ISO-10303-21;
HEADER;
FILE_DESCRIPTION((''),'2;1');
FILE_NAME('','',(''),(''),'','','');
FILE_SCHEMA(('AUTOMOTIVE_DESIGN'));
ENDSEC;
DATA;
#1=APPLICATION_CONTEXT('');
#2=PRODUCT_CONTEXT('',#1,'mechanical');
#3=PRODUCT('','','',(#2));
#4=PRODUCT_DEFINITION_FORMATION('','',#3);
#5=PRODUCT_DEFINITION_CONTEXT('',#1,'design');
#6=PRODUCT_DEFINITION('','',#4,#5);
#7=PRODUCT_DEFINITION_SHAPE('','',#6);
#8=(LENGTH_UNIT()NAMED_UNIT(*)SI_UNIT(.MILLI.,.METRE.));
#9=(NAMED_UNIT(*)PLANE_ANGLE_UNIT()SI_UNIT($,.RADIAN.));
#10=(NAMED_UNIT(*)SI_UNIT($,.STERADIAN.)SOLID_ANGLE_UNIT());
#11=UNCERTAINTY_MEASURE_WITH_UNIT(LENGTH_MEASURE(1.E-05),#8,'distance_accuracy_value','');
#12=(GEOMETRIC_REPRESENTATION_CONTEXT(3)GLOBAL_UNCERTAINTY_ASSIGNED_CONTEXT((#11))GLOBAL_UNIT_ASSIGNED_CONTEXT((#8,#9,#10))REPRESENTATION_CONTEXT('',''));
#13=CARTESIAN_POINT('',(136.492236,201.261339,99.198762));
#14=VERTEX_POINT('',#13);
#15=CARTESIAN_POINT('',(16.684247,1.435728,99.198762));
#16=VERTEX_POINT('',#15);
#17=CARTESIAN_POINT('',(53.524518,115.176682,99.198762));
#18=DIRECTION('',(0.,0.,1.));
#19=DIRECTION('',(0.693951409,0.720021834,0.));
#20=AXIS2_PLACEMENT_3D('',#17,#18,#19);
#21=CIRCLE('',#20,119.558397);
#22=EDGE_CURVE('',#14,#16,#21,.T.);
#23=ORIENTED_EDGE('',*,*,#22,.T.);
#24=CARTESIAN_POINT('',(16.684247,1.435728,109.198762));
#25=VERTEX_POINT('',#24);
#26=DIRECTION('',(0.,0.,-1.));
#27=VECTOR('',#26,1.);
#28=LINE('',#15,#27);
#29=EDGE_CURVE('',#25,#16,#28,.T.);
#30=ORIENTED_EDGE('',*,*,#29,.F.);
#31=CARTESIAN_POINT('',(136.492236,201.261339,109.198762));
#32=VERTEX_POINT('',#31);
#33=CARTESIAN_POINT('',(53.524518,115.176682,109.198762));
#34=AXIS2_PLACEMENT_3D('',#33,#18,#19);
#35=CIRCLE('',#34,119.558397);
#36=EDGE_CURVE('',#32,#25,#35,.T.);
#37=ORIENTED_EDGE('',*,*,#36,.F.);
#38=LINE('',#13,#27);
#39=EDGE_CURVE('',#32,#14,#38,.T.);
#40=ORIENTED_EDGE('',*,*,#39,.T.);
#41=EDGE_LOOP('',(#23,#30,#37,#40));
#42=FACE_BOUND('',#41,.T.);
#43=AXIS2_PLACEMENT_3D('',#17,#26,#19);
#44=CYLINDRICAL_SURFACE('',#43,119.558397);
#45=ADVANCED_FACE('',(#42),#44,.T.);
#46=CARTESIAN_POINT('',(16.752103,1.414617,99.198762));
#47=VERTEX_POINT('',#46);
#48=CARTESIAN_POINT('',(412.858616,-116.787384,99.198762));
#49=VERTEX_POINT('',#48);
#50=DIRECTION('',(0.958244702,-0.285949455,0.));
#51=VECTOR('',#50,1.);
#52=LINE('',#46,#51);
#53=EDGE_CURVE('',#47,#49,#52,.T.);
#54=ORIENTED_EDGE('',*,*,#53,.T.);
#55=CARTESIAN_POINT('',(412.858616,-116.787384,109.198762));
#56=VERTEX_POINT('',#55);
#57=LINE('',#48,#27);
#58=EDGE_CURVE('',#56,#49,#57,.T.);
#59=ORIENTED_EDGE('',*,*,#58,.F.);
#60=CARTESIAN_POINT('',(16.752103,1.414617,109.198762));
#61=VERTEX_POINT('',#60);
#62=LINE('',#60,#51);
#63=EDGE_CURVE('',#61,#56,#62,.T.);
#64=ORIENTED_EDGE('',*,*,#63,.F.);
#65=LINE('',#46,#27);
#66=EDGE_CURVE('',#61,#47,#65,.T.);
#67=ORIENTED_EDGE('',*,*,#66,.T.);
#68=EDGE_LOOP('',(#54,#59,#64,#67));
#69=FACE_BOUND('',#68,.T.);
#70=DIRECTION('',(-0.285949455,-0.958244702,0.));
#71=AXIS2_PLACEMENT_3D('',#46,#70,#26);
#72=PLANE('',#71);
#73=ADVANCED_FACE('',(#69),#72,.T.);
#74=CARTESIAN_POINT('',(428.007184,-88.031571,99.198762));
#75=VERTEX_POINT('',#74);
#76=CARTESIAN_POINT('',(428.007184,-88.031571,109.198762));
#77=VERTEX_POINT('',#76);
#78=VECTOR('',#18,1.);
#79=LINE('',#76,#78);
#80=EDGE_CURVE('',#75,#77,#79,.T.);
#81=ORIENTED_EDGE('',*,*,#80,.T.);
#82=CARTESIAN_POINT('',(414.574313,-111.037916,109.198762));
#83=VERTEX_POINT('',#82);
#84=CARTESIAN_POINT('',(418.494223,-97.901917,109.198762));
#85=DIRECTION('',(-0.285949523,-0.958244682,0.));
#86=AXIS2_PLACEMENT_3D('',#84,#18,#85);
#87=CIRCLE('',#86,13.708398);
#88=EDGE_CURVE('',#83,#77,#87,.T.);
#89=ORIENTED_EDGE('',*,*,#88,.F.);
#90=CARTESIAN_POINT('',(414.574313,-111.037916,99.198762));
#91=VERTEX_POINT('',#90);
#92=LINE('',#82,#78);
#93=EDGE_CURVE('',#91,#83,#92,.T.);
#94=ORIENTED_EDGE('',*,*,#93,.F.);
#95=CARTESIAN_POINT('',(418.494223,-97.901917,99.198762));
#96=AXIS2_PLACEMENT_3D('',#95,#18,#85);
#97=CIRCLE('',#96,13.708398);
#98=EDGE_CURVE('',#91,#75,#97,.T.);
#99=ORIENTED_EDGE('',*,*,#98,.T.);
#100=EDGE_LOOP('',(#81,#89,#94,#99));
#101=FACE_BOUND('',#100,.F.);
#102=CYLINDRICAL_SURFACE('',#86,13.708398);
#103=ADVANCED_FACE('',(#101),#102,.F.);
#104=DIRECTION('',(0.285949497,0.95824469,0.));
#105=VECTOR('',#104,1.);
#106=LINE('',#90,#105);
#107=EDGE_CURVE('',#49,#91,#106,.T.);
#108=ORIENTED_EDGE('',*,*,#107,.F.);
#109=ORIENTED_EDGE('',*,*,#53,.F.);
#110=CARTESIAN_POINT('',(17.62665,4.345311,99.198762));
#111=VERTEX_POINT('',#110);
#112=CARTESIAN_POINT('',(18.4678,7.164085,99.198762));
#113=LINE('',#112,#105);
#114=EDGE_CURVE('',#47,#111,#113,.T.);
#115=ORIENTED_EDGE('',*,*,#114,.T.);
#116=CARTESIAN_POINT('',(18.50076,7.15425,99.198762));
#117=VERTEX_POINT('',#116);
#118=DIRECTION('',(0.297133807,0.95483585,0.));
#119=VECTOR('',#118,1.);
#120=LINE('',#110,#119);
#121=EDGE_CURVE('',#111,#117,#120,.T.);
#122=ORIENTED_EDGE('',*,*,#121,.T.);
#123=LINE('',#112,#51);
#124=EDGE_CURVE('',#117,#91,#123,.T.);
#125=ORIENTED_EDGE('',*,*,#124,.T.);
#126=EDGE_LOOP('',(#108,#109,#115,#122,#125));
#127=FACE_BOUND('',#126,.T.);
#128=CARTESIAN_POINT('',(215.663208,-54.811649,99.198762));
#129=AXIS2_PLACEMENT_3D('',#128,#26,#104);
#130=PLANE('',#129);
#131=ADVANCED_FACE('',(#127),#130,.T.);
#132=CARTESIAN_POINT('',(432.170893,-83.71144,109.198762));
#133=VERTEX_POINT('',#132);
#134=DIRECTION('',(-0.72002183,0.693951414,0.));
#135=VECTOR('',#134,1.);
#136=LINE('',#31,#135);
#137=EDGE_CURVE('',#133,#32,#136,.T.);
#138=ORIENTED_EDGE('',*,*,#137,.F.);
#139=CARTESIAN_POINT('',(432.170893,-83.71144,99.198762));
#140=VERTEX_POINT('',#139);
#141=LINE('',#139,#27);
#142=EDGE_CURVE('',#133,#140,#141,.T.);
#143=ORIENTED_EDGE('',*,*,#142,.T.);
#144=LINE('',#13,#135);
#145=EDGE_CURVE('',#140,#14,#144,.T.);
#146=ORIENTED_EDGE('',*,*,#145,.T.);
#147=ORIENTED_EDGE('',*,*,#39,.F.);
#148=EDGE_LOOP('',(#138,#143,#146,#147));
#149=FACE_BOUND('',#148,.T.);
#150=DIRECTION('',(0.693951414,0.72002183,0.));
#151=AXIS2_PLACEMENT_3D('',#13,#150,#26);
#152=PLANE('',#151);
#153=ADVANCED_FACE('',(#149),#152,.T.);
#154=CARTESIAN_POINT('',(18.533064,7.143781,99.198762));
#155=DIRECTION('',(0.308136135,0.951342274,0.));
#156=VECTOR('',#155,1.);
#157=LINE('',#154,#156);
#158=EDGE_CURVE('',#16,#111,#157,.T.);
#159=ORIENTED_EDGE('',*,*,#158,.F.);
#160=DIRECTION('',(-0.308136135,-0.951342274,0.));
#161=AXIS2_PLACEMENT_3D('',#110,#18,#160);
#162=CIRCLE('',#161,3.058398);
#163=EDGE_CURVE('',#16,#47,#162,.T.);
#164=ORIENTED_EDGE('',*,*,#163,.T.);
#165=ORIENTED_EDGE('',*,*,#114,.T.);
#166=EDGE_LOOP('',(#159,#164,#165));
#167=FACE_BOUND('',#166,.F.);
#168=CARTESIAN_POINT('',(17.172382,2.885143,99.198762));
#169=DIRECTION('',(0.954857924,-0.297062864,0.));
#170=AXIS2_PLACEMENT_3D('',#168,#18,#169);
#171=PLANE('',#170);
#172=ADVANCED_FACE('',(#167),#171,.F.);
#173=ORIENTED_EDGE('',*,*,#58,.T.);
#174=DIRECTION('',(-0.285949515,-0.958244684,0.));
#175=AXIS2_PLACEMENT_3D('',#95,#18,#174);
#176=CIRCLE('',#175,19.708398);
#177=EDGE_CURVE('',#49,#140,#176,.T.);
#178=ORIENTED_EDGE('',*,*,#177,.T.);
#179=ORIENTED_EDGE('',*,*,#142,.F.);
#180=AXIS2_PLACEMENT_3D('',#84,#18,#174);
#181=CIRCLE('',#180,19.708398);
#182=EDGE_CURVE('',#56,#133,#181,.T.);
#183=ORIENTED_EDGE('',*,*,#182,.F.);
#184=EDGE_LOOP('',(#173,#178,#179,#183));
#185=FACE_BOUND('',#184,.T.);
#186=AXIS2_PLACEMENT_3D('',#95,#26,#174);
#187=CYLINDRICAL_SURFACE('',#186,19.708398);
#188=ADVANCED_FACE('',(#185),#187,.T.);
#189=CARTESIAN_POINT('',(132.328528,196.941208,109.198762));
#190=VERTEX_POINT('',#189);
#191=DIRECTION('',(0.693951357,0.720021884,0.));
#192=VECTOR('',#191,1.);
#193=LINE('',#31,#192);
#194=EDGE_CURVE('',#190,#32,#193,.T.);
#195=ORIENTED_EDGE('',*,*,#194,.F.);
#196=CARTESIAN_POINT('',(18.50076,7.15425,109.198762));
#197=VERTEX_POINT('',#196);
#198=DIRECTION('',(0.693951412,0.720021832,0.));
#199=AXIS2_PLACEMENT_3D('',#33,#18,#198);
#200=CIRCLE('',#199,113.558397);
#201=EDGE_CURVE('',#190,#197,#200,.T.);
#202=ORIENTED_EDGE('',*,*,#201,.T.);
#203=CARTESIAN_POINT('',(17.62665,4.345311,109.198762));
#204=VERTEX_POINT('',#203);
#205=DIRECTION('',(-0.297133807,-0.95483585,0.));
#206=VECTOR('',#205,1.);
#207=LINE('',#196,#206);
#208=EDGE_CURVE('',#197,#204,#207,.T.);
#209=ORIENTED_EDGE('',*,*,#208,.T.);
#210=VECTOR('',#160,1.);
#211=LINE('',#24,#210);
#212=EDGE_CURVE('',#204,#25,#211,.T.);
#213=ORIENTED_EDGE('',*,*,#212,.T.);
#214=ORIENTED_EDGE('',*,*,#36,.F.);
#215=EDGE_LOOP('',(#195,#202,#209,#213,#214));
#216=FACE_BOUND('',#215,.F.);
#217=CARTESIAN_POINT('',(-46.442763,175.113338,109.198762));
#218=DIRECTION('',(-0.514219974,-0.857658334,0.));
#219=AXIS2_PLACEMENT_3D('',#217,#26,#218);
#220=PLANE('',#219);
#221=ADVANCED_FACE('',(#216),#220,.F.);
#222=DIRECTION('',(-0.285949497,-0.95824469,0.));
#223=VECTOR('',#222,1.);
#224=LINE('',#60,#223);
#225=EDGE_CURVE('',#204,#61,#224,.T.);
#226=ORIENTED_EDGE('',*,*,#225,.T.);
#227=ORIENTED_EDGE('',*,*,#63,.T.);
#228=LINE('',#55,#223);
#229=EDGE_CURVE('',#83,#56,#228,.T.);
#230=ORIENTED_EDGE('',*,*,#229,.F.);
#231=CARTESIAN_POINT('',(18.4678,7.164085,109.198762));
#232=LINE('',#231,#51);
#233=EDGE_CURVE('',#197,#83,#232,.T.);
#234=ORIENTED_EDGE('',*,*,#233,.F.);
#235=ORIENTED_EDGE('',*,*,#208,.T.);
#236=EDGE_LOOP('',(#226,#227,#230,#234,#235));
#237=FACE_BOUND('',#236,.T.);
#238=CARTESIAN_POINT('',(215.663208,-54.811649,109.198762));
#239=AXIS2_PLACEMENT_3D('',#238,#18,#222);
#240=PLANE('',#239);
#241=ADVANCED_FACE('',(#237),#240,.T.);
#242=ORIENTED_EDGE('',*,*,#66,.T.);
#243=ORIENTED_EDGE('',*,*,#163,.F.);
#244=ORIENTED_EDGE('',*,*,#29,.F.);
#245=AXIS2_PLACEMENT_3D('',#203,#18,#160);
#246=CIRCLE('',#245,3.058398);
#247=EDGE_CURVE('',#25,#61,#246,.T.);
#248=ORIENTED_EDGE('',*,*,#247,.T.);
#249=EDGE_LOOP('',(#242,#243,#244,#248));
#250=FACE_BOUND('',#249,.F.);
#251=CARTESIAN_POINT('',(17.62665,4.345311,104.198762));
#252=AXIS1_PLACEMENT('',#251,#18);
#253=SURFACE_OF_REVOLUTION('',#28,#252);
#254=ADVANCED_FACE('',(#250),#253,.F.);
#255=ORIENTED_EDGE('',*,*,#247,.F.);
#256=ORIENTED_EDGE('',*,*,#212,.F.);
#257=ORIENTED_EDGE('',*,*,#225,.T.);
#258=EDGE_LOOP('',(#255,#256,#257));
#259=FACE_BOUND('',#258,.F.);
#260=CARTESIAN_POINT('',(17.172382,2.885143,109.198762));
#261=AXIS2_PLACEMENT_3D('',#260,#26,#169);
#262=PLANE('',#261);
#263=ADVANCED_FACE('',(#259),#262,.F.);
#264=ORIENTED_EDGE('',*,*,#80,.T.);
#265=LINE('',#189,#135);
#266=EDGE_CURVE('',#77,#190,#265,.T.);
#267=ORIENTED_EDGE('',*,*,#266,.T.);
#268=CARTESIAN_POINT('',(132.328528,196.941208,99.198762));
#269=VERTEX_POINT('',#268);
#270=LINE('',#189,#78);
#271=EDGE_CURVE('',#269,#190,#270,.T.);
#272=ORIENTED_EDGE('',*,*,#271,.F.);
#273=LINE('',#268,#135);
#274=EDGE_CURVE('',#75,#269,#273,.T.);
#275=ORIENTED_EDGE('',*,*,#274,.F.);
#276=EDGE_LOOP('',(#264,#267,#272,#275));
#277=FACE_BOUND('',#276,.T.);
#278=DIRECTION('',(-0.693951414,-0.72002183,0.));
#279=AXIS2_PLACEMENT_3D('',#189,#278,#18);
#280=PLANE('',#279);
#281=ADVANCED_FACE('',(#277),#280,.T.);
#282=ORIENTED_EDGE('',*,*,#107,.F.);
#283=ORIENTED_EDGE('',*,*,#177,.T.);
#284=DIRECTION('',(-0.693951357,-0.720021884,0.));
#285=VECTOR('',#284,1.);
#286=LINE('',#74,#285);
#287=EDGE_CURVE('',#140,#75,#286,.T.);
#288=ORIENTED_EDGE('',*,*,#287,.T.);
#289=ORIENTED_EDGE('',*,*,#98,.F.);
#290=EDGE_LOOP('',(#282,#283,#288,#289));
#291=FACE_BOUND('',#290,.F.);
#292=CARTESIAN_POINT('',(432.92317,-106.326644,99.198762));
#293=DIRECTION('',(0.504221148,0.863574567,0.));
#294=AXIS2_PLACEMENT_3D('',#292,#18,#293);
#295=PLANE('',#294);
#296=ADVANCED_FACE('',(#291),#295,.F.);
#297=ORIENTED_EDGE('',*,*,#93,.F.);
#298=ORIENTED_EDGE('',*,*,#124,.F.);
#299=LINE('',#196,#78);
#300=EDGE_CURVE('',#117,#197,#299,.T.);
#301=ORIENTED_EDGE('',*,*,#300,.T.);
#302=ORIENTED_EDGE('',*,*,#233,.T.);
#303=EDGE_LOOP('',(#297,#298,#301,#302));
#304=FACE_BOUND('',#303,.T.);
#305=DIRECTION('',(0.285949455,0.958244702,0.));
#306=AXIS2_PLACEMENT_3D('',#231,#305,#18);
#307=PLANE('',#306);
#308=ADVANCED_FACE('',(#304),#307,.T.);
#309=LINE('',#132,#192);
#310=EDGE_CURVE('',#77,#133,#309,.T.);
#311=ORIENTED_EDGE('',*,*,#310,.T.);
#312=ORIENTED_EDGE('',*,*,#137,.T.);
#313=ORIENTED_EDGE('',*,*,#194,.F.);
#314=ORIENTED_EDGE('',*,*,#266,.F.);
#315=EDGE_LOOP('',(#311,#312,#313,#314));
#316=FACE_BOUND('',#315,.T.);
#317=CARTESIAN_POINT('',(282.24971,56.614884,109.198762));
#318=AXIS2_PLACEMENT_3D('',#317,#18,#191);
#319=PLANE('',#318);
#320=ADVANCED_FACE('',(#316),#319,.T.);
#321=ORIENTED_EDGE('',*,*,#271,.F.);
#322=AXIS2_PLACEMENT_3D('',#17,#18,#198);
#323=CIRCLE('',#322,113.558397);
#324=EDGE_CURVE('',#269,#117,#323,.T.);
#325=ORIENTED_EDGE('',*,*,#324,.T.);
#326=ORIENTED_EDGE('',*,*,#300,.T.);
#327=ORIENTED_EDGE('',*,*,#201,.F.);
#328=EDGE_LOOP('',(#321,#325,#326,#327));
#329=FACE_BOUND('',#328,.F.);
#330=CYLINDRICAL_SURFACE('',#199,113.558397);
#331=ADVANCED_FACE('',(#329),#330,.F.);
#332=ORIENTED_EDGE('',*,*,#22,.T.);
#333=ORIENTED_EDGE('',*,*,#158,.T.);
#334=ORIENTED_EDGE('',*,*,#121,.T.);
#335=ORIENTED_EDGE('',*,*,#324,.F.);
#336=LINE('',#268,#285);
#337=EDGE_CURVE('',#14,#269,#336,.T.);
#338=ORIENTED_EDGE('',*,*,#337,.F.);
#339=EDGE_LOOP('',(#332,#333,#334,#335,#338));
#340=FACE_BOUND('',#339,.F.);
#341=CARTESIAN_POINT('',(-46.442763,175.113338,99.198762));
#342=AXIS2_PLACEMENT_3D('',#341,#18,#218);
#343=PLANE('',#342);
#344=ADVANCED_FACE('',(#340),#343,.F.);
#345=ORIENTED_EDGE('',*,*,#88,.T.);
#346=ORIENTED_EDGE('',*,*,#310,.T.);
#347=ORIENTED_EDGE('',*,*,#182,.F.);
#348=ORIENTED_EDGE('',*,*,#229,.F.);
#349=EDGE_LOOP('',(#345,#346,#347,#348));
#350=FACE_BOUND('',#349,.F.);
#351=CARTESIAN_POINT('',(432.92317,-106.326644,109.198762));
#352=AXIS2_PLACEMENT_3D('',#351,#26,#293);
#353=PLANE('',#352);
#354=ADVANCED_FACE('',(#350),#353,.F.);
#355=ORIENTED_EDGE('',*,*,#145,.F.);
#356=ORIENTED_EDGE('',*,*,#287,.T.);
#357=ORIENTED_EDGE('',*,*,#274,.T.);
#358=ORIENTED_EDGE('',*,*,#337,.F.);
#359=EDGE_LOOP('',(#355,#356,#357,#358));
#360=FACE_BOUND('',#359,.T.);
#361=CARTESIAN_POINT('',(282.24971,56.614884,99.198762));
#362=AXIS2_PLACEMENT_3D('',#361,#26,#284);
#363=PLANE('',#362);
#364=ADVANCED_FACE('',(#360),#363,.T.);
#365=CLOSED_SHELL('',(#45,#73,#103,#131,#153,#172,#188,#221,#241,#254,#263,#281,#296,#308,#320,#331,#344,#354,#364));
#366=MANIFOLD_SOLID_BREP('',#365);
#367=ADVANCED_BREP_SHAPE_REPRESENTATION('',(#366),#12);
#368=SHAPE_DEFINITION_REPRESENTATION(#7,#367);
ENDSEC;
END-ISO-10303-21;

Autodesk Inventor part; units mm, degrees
ref_plane "YZ Plane" through (0, 0, 0) normal (1, 0, 0) x (0, 1, 0)
ref_plane "XZ Plane" through (0, 0, 0) normal (0, 1, 0) x (-1, 0, 0)
ref_plane "Work Plane6" through (-3.713488, 14.864291, 104.198762) normal (0, 0, 1) x (0.9994468, -0.0332592, 0)
sketch "Sketch1" plane through (-3.713488, 14.864291, 104.198762) normal (0, 0, 1) x (0.9994468, -0.0332592, 0)
  arc A0 (131.880776, 188.685572) -> (21.678185, -9.803405) centre (53.87003, 102.160585) ccw
  line L0 (131.880776, 188.685572) -> (436.873817, -86.295513)
  circle A1 centre (53.87003, 102.160585) radius 17.5
  arc A2 (21.678185, -9.803405) -> (24.529382, -10.584155) centre (53.87003, 102.160585) ccw
  arc A3 (421.49686, -114.765827) -> (436.873817, -86.295513) centre (425.724642, -98.66153) ccw
  line L1 (21.678185, -9.803405) -> (421.49686, -114.765827)
ref_plane "Work Plane13" through (20.450302, 3.470164, 104.198762) normal (0.9582447, -0.2859495, 0) x (0.2859495, 0.9582447, 0)
sketch "Sketch2" plane through (82.301795, 210.740594, 104.198762) normal (0.9582447, -0.2859495, 0) x (0.2859495, 0.9582447, 0)
  line L0 (-213.329407, -5) -> (-219.329407, -5)
  line L1 (-219.329407, -5) -> (-219.329407, 5)
  line L2 (-219.329407, 5) -> (-213.329407, 5)
  line L3 (-213.329407, 5) -> (-213.329407, -5)
  line L4 (-219.329407, -5) -> (-213.329407, 5) construction
  line L5 (-219.329407, 5) -> (-213.329407, -5) construction
  point P0 (-216.329407, 0)
  point P1 (-216.329407, 0)
  point P2 (-216.329407, 0)
  point P3 (-216.329407, 0)
  dimension "d0" = 6
  dimension "d1" = 10
sweep "Sweep1" add profiles "Sketch2" path "Sketch1" path curves L1 A3 L0 A0
properties part number "Cadena2"
